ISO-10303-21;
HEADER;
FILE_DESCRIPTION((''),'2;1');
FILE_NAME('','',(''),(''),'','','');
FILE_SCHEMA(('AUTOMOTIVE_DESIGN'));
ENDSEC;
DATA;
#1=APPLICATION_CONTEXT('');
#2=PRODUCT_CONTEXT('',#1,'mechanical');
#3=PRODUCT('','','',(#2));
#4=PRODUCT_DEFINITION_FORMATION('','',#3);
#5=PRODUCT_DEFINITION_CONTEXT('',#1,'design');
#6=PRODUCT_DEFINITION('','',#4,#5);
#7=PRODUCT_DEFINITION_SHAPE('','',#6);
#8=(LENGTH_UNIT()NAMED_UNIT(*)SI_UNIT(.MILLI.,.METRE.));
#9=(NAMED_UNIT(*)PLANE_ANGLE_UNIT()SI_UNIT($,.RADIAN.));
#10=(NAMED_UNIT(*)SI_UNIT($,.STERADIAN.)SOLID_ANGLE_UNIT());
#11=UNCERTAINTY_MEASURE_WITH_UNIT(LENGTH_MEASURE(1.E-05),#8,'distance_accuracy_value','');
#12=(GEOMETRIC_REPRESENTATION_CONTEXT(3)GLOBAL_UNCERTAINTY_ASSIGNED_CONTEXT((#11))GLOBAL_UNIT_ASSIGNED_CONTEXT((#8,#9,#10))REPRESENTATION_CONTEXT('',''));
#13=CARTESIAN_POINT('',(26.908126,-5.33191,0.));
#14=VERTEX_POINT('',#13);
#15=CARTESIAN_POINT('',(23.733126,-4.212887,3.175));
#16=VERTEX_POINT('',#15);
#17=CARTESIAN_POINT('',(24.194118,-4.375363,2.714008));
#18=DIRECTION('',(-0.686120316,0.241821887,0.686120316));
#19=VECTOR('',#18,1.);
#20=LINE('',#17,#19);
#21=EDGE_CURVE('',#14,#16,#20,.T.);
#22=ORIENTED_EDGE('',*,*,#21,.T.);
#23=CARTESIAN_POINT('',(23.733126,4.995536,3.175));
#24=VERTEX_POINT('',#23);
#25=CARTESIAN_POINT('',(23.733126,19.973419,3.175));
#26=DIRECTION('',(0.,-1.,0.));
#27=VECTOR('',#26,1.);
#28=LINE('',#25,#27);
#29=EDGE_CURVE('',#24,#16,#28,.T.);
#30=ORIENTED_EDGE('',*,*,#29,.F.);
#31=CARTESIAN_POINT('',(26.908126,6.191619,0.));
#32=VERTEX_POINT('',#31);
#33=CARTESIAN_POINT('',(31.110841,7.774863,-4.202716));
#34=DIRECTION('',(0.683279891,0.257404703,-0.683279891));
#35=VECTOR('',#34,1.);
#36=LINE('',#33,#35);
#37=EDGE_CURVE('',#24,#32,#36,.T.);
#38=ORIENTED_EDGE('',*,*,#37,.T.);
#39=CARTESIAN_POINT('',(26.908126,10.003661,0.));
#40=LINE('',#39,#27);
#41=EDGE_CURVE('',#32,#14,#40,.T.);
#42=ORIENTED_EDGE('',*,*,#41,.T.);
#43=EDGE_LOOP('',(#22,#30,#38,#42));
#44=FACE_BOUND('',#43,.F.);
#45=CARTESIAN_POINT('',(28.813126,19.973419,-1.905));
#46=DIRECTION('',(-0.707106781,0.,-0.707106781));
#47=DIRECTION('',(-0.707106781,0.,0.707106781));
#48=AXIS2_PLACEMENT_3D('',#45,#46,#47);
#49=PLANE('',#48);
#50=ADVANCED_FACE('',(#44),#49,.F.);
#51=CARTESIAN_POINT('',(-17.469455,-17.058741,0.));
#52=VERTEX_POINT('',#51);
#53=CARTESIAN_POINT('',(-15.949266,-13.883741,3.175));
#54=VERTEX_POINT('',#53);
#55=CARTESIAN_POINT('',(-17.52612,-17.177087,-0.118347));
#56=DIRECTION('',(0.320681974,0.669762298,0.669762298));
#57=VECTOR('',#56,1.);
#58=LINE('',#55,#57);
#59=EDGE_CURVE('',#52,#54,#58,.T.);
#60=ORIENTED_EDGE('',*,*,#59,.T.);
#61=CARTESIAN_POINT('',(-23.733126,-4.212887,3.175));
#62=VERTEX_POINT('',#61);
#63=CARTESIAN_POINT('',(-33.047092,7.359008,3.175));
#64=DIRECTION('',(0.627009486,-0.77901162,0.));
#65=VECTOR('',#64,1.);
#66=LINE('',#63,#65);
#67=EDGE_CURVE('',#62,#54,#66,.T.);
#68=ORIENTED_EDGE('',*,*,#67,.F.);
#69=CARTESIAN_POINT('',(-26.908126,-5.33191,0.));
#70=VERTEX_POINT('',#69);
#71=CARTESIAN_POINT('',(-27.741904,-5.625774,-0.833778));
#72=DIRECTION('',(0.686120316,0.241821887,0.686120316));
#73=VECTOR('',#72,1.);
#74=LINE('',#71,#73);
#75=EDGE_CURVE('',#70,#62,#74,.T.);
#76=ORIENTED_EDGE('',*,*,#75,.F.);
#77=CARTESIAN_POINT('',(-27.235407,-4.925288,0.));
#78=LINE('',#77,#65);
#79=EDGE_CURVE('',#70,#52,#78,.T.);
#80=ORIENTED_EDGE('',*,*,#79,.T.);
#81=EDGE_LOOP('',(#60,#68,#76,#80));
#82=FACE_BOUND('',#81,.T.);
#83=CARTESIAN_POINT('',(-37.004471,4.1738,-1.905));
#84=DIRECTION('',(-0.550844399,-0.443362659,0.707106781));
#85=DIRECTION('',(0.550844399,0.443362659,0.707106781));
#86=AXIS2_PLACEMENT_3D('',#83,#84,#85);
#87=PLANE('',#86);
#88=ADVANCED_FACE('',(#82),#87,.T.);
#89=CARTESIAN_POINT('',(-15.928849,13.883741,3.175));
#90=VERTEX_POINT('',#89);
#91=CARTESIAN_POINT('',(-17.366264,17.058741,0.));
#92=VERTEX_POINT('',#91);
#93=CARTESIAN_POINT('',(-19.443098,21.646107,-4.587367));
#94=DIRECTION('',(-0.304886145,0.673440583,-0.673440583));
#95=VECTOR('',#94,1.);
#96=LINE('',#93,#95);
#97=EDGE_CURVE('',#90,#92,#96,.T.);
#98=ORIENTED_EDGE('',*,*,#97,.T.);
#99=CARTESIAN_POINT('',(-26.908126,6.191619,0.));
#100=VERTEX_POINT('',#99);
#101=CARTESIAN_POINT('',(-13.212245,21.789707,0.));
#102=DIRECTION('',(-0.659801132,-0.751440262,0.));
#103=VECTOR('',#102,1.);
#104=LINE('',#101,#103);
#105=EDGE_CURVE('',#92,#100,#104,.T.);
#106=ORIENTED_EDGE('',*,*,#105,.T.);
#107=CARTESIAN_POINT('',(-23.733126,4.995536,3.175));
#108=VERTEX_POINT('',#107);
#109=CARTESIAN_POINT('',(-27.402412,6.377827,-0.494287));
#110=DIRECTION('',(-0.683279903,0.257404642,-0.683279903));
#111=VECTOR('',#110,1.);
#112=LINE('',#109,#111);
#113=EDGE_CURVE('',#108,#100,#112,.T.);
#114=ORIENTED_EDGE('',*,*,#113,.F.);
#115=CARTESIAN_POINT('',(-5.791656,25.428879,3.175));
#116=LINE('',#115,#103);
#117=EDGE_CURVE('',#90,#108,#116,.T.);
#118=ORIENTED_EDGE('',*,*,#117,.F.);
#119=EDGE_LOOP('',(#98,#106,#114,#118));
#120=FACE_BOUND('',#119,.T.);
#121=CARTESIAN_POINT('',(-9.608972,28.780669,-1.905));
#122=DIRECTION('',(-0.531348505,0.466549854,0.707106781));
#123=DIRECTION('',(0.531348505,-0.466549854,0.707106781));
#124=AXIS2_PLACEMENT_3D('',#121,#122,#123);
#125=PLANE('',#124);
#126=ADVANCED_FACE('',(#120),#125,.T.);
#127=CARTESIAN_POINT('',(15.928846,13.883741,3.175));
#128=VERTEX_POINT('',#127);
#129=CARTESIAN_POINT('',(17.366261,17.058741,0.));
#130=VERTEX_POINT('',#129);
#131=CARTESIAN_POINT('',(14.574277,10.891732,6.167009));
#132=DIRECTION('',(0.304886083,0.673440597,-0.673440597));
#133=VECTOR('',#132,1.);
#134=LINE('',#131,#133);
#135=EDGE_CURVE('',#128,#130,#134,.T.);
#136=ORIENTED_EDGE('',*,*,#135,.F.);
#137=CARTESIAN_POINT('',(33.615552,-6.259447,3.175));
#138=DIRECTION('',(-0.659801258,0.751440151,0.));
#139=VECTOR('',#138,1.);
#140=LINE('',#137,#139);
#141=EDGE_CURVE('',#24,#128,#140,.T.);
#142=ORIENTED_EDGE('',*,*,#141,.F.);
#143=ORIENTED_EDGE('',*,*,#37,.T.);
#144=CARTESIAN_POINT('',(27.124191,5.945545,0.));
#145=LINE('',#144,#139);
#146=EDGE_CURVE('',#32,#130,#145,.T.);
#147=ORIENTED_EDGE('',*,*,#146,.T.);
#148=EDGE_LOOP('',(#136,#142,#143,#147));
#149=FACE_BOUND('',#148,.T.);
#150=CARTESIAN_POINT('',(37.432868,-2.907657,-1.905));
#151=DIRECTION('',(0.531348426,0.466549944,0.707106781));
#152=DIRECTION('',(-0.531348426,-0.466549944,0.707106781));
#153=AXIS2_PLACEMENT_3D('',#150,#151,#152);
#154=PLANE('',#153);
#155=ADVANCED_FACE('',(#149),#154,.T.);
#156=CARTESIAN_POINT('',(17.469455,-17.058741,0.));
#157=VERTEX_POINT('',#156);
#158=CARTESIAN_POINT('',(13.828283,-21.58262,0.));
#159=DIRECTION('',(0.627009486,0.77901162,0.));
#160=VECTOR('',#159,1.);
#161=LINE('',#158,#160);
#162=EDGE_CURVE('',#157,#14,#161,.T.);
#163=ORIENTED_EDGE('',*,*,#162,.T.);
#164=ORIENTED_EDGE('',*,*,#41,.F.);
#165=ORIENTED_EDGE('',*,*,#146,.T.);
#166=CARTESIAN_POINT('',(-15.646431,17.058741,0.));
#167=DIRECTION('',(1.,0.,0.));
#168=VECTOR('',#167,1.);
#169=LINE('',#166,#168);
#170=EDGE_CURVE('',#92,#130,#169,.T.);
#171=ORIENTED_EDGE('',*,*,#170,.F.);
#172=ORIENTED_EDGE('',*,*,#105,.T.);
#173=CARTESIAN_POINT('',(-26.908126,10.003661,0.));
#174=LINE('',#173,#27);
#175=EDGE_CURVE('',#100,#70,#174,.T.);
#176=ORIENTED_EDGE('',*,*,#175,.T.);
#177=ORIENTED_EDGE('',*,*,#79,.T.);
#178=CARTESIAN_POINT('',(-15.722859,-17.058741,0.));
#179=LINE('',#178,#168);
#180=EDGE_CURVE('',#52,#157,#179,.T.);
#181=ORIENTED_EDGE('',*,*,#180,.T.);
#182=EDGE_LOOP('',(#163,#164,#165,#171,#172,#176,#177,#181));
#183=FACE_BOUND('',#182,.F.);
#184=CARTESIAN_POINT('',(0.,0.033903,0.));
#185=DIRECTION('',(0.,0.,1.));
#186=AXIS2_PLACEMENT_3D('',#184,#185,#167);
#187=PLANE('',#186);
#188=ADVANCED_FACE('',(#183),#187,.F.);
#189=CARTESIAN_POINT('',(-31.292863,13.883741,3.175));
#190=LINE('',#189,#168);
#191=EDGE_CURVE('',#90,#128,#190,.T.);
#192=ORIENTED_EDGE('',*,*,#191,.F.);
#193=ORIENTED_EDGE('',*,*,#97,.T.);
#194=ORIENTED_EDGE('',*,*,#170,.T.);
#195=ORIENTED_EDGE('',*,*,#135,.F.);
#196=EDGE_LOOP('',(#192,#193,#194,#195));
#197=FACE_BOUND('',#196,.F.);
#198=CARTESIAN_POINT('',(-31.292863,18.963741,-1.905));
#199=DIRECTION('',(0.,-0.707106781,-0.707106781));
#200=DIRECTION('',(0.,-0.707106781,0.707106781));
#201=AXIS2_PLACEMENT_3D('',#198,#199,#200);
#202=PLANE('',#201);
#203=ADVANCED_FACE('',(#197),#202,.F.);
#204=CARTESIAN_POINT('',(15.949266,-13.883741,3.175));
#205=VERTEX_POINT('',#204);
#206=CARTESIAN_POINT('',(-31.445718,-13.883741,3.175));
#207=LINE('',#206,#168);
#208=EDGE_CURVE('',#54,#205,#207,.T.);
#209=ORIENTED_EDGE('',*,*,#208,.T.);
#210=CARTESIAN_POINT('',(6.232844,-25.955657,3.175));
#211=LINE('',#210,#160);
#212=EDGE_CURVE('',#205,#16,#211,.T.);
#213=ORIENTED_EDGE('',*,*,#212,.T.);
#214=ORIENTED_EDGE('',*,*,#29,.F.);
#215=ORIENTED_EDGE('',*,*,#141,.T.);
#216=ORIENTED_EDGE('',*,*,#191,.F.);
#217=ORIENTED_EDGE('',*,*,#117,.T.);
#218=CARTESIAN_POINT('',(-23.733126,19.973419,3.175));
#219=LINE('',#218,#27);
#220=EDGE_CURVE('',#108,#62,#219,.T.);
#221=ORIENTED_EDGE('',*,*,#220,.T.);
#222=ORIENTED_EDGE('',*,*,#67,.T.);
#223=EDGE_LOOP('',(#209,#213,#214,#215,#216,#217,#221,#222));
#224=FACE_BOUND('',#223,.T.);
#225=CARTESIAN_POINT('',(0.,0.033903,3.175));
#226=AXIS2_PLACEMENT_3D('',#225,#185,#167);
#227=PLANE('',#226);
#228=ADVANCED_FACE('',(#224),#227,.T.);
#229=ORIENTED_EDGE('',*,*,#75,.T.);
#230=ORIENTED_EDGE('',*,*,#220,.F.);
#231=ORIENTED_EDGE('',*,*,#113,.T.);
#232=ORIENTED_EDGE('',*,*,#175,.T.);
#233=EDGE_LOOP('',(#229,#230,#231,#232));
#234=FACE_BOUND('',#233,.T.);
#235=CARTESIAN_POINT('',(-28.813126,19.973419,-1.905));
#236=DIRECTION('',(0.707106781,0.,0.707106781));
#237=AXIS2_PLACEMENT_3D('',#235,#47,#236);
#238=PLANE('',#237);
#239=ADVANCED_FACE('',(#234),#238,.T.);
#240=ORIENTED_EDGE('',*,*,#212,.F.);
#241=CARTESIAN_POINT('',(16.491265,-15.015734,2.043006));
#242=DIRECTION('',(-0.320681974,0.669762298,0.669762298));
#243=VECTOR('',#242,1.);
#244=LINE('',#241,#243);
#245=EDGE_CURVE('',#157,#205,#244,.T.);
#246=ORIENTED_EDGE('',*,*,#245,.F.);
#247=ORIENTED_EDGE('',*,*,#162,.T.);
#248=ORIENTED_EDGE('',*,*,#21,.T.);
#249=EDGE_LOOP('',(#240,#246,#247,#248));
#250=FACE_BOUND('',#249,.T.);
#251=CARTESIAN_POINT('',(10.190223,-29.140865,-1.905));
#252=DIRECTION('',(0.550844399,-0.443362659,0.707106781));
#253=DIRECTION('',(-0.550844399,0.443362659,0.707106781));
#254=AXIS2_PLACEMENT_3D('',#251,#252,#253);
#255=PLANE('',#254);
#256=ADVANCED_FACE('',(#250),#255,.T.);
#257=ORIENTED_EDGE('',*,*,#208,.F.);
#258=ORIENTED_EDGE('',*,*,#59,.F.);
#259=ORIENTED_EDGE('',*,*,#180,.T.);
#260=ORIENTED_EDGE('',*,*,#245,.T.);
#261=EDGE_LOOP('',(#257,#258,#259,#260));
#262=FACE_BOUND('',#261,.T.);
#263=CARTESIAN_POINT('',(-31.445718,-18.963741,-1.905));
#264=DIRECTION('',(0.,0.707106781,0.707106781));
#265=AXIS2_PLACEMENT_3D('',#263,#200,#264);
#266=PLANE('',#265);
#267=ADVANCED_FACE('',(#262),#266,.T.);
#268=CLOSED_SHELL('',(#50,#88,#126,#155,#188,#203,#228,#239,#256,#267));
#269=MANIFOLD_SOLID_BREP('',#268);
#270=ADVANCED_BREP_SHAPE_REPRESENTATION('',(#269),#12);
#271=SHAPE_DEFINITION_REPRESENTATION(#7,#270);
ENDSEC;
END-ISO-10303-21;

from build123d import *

# Parameters (mm, degrees)
F1_DEPTH     = 3.175
F2_T1_DEPTH  = 39.0408928639
F2_T3_DEPTH  = 42.1701237591
F2_T5_DEPTH  = 62.58572165
F2_T7_DEPTH  = 42.1701213881
F2_T9_DEPTH  = 42.7652991577
F2_T11_DEPTH = 62.8914365267
F2_T13_DEPTH = 42.7652991577


# Not quite as in the source:
# - a fillet or chamfer that OpenCascade refuses, or shapes differently, is made with other operations: its cross-section is extruded or revolved along the edge and cut away or added


with BuildPart() as f1:
    # F0 (on Top) → F1 (new body)
    with BuildSketch(Plane.XY):
        Polygon((28.8131255029, 6.9092694693), (18.2287094494, 18.963740563), (-18.2287130429, 18.963740563), (-28.8131255029, 6.9092694693), (-28.8131255029, -6.0033242369), (-18.3815686845, -18.963740563), (18.3815686845, -18.963740563), (28.8131255029, -6.0033242369), align=None)
    extrude(amount=F1_DEPTH)

    # F2: chamfer of 5.08 on 8 edges, made by hand

    # F2_s2 → F2_t1 (cut)
    with BuildSketch(Plane.XZ.offset(-19.9734190482)):
        Polygon((28.8131255029, -1.905), (23.7331255029, 3.175), (28.8131255029, 3.175), align=None)
        Polygon((-28.8131255029, -1.905), (-23.7331255029, 3.175), (-28.8131255029, 3.175), align=None)
    extrude(amount=F2_T1_DEPTH, mode=Mode.SUBTRACT)

    # F2_s4 → F2_t3 (cut)
    with BuildSketch(Plane(origin=(17.7375583227, -20.2011034897, 0), x_dir=(0, 0, 1), z_dir=(-0.6598012581, 0.7514401506, 0))):
        Polygon((-1.905, 26.210084054), (3.175, 21.130084054), (3.175, 26.210084054), align=None)
    extrude(amount=F2_T3_DEPTH, mode=Mode.SUBTRACT)

    # F2_s6 → F2_t5 (cut)
    with BuildSketch(Plane.YZ.offset(-31.2928626217)):
        Polygon((18.963740563, -1.905), (13.883740563, 3.175), (18.963740563, 3.175), align=None)
    extrude(amount=F2_T5_DEPTH, mode=Mode.SUBTRACT)

    # F2_s8 → F2_t7 (cut)
    with BuildSketch(Plane(origin=(10.0863417988, 11.4872238883, 0), x_dir=(0, 0, 1), z_dir=(-0.6598011316, -0.7514402616, 0))):
        Polygon((-1.905, 26.2100863801), (3.175, 21.1300863801), (3.175, 26.2100863801), align=None)
    extrude(amount=F2_T7_DEPTH, mode=Mode.SUBTRACT)

    # F2_s10 → F2_t9 (cut)
    with BuildSketch(Plane(origin=(-16.5866539058, 20.6076565386, 0), x_dir=(0, 0, 1), z_dir=(0.627009486, -0.7790116202, 0))):
        Polygon((-1.905, 26.2099008264), (3.175, 21.1299008264), (3.175, 26.2099008264), align=None)
    extrude(amount=F2_T9_DEPTH, mode=Mode.SUBTRACT)

    # F2_s12 → F2_t11 (cut)
    with BuildSketch(Plane.YZ.offset(-31.4457182634)):
        Polygon((-18.963740563, -1.905), (-13.883740563, 3.175), (-18.963740563, 3.175), align=None)
    extrude(amount=F2_T11_DEPTH, mode=Mode.SUBTRACT)

    # F2_s14 → F2_t13 (cut)
    with BuildSketch(Plane(origin=(-10.2275943371, -12.7070084487, 0), x_dir=(0, 0, 1), z_dir=(0.627009486, 0.7790116202, 0))):
        Polygon((-1.905, 26.2099008264), (3.175, 21.1299008264), (3.175, 26.2099008264), align=None)
    extrude(amount=F2_T13_DEPTH, mode=Mode.SUBTRACT)


solid = f1.part
